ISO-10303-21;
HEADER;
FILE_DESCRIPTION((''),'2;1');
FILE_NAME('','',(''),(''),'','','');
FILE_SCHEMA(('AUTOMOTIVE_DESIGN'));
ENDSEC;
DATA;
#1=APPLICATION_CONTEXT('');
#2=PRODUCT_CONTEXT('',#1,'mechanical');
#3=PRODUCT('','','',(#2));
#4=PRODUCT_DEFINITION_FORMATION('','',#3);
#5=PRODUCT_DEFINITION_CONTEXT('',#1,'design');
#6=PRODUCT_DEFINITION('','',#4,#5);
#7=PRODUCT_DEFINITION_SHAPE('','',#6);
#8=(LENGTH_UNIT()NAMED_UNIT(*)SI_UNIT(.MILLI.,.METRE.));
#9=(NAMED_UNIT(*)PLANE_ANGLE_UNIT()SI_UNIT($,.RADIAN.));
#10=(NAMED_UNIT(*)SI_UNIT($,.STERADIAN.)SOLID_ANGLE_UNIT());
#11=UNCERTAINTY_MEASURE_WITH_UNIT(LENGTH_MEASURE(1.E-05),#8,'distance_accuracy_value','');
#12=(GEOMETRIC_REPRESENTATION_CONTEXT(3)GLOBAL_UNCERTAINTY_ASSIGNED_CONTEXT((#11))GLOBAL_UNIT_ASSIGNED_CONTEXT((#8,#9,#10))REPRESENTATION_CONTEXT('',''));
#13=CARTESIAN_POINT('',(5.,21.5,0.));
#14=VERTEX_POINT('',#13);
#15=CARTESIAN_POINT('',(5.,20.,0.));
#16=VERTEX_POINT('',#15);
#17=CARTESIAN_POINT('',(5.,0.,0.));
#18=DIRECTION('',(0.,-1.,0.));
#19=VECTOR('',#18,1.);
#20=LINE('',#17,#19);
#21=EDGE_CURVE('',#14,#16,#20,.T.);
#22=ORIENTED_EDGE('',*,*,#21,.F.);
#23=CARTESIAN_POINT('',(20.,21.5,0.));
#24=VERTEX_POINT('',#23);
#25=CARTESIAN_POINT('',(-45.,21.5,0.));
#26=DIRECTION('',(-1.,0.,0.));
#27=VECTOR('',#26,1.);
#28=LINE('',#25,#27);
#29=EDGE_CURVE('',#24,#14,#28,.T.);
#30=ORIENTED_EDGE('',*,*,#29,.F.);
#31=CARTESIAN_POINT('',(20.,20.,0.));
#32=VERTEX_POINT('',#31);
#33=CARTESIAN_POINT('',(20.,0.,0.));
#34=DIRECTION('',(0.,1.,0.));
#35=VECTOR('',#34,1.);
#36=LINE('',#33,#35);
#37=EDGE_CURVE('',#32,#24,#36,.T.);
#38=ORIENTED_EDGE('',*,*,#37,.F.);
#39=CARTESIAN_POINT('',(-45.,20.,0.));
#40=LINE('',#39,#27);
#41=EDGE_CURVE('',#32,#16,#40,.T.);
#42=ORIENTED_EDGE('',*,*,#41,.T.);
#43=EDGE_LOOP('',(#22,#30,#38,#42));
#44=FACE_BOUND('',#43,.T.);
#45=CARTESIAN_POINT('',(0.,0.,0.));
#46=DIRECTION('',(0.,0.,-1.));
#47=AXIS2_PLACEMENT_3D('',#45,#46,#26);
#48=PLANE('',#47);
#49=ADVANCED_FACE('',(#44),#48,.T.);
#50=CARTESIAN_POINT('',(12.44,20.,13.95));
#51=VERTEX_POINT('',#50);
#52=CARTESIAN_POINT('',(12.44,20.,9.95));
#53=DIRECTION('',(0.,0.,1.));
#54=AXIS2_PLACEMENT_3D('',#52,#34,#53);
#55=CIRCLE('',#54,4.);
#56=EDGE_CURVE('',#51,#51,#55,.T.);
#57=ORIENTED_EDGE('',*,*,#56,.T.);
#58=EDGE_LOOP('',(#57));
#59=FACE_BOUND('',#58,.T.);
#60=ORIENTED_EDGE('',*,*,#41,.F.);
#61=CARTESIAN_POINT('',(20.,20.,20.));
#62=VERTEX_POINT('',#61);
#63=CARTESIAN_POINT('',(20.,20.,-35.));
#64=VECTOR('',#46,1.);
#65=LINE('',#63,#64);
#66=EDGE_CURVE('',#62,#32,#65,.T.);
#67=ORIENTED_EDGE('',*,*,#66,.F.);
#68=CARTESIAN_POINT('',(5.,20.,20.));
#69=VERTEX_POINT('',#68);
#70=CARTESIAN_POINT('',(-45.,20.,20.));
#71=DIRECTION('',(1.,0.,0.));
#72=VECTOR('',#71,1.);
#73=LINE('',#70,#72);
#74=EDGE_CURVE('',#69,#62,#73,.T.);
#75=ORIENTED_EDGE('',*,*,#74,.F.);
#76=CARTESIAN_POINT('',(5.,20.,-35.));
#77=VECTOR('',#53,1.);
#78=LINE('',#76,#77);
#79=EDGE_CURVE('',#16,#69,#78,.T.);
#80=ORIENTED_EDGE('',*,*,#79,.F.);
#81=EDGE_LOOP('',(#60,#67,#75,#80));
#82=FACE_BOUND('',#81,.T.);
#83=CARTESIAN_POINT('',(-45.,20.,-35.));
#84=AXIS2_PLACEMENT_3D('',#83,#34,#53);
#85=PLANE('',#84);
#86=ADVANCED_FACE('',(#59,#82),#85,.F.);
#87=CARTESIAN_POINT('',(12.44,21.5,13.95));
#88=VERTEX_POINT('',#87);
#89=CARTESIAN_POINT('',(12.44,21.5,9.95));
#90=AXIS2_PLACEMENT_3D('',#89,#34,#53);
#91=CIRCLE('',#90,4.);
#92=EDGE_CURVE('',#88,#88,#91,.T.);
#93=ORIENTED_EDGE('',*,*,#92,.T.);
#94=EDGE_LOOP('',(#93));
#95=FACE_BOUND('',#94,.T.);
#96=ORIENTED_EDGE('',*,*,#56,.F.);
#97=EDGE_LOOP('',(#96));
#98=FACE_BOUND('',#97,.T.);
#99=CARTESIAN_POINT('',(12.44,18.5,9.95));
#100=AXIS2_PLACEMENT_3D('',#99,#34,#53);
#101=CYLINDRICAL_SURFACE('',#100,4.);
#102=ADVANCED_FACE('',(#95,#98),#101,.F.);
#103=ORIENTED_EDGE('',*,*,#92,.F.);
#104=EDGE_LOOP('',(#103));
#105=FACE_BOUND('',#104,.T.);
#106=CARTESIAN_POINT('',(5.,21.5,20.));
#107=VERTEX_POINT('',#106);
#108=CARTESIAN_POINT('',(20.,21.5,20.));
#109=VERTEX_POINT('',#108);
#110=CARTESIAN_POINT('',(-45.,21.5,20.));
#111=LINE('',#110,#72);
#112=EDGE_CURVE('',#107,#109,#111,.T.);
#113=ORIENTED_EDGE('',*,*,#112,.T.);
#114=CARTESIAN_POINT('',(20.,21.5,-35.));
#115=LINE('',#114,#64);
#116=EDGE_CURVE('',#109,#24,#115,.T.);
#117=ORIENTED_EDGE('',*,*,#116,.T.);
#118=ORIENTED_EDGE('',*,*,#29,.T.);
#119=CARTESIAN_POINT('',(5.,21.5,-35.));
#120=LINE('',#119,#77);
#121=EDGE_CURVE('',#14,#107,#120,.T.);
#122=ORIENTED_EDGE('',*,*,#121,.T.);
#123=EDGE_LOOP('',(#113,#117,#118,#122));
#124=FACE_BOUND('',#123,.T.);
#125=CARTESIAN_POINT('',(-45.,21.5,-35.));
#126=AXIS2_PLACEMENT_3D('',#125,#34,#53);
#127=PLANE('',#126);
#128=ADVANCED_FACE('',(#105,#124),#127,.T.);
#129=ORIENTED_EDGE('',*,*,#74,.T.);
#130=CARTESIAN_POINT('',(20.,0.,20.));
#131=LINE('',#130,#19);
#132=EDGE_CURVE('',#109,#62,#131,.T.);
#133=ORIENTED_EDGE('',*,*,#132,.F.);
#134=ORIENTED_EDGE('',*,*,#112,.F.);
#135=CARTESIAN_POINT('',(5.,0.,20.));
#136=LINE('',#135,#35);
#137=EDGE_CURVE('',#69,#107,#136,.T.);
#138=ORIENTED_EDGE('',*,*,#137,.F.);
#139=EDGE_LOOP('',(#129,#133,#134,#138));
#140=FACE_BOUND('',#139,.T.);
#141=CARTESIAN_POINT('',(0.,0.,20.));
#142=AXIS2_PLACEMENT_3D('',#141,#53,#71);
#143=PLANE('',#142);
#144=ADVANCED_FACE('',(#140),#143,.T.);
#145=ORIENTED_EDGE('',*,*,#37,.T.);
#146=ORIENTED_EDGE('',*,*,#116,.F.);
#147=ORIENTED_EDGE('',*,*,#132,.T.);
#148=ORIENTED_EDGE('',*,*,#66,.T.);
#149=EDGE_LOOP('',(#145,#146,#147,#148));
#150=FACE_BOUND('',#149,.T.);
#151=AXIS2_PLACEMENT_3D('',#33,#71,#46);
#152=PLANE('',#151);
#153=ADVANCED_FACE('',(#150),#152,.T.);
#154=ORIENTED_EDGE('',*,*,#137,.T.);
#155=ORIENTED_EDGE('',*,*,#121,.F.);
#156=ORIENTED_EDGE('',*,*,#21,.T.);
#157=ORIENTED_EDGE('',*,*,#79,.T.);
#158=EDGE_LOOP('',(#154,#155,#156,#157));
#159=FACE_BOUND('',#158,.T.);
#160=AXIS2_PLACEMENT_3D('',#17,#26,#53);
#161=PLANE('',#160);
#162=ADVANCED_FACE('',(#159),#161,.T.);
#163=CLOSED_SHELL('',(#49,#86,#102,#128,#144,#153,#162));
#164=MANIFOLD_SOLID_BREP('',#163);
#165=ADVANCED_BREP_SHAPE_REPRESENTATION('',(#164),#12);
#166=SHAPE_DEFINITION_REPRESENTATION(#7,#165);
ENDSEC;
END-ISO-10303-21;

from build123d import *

# Parameters (mm, degrees)
BOSS_EXTRUDE1_DEPTH = 20
BOSS_EXTRUDE2_DEPTH = 1.5
SKETCH3_W           = 10
SKETCH3_H           = 2
BOSS_EXTRUDE3_DEPTH = 100
SKETCH4_R           = 1.55
CUT_EXTRUDE1_DEPTH  = 2
SKETCH5_R           = 4
CUT_EXTRUDE2_DEPTH  = 3
CUT_EXTRUDE3_START  = -2
CUT_EXTRUDE3_DEPTH  = 2
SKETCH7_W           = 92.843167551
SKETCH7_H           = 36.119357845
CUT_EXTRUDE4_DEPTH  = 30
SKETCH8_W           = 90.626752411
SKETCH8_H           = 35.380552798
CUT_EXTRUDE5_DEPTH  = 55
SKETCH10_W          = 29.390209747
SKETCH10_H          = 30.061690813
CUT_EXTRUDE7_DEPTH  = 20
SKETCH11_W          = 23.008025921
SKETCH11_H          = 26.899718038
CUT_EXTRUDE8_DEPTH  = 40


# Read off the part's stored shape, not the designer's step: Boss-Extrude1, Cut-Extrude3
with BuildPart() as part:
    # Boss-Extrude1 outline → Boss-Extrude1 (new body)
    with BuildSketch(Plane(origin=(0, 0, 0), x_dir=(1, 0, 0), z_dir=(0, 1, 0))):
        with BuildLine():
            Line((49.999999852, 30), (4.999999852, 30))
            ThreePointArc((4.999999852, 30), (1.464465946, 31.464466094), (-1.48e-07, 35))
            Line((-1.48e-07, 35), (-1.48e-07, 40))
            Line((-1.48e-07, 40), (-40.000000148, 40))
            Line((-40.000000148, 40), (-40.000000111, 35))
            ThreePointArc((-40.000000111, 35), (-41.464466194, 31.46446612), (-45.000000074, 30.000000037))
            Line((-45.000000074, 30.000000037), (-50.000000148, 30))
            Line((-50.000000148, 30), (-50.000000148, -30))
            Line((-50.000000148, -30), (49.999999852, -30))
            Line((49.999999852, -30), (49.999999852, 30))
        make_face()
        with BuildLine():
            Line((-48.5, 28.5), (-44.999018222, 28.5))
            ThreePointArc((-44.999018222, 28.5), (-40.40345882, 30.40415302), (-38.5, 35))
            Line((-38.5, 35), (-38.5, 38.5))
            Line((-38.5, 38.5), (-1.500000148, 38.5))
            Line((-1.500000148, 38.5), (-1.500000148, 35))
            ThreePointArc((-1.500000148, 35), (0.403805774, 30.403805922), (4.999999852, 28.5))
            Line((4.999999852, 28.5), (48.5, 28.5))
            Line((48.5, 28.5), (48.5, -28.5))
            Line((48.5, -28.5), (-48.5, -28.5))
            Line((-48.5, -28.5), (-48.5, 28.5))
        make_face(mode=Mode.SUBTRACT)
    extrude(amount=BOSS_EXTRUDE1_DEPTH)

    # Sketch2 → Boss-Extrude2 (add)
    with BuildSketch(Plane(origin=(0, 20, 0), x_dir=(1, 0, 0), z_dir=(0, 1, 0))):
        with BuildLine():
            Line((-40.000000148, 40), (-1.48e-07, 40))
            Line((-1.48e-07, 40), (-1.48e-07, 35))
            ThreePointArc((-1.48e-07, 35), (1.464465946, 31.464466094), (4.999999852, 30))
            Line((4.999999852, 30), (49.999999852, 30))
            Line((49.999999852, 30), (49.999999852, -30))
            Line((49.999999852, -30), (-50.000000148, -30))
            Line((-50.000000148, -30), (-50.000000148, 30))
            Line((-50.000000148, 30), (-45.000000074, 30))
            ThreePointArc((-45.000000074, 30), (-41.464466216, 31.46446612), (-40.000000148, 35))
            Line((-40.000000148, 35), (-40.000000148, 40))
        make_face()
    extrude(amount=BOSS_EXTRUDE2_DEPTH)

    # Sketch3 → Boss-Extrude3 (add)
    with BuildSketch(Plane(origin=(49.999999852, 0, 0), x_dir=(0, 0, -1), z_dir=(1, 0, 0))):
        with Locations((35, 1)):
            Rectangle(SKETCH3_W, SKETCH3_H)
        with Locations((-35, 1)):
            Rectangle(SKETCH3_W, SKETCH3_H)
    extrude(amount=-BOSS_EXTRUDE3_DEPTH)

    # Sketch4 → Cut-Extrude1 (cut)
    with BuildSketch(Plane.XZ):
        with Locations(Location((-45, 35, 0), (0, 0, 270))):
            Circle(SKETCH4_R)
        with Locations(Location((45, 35, 0), (0, 0, 270))):
            Circle(SKETCH4_R)
        with Locations(Location((45, -35, 0), (0, 0, 270))):
            Circle(SKETCH4_R)
        with Locations(Location((-45, -35, 0), (0, 0, 270))):
            Circle(SKETCH4_R)
        with Locations(Location((5, 35, 0), (0, 0, 270))):
            Circle(SKETCH4_R)
        with Locations(Location((5, -35, 0), (0, 0, 270))):
            Circle(SKETCH4_R)
    extrude(amount=-CUT_EXTRUDE1_DEPTH, mode=Mode.SUBTRACT)

    # Sketch5 → Cut-Extrude2 (cut)
    with BuildSketch(Plane(origin=(0, 21.5, 0), x_dir=(1, 0, 0), z_dir=(0, 1, 0))):
        with Locations(Location((12.44, -9.95, 0), (0, 0, 270))):
            Circle(SKETCH5_R)
    extrude(amount=-CUT_EXTRUDE2_DEPTH, mode=Mode.SUBTRACT)

    # Cut-Extrude3 outline → Cut-Extrude3 (cut)
    with BuildSketch(Plane(origin=(0, 2, 0), x_dir=(1, 0, 0), z_dir=(0, 1, 0)).offset(CUT_EXTRUDE3_START)):
        with BuildLine():
            Line((-38.5, 38.5), (-38.5, 35))
            ThreePointArc((-38.5, 35), (-39.115846372, 32.238345392), (-40.846688027, 30))
            Line((-40.846688027, 30), (0.84668792, 30))
            ThreePointArc((0.84668792, 30), (-0.884153764, 32.238345383), (-1.500000148, 35))
            Line((-1.500000148, 35), (-1.500000148, 38.5))
            Line((-1.500000148, 38.5), (-38.5, 38.5))
        make_face()
    extrude(amount=CUT_EXTRUDE3_DEPTH, mode=Mode.SUBTRACT)

    # Sketch7 → Cut-Extrude4 (cut)
    with BuildSketch(Plane(origin=(49.999999852, 0, 0), x_dir=(0, 0, -1), z_dir=(1, 0, 0))):
        with Locations((0.287313074, 10.115071794)):
            Rectangle(SKETCH7_W, SKETCH7_H)
    extrude(amount=-CUT_EXTRUDE4_DEPTH, mode=Mode.SUBTRACT)

    # Sketch8 → Cut-Extrude5 (cut)
    with BuildSketch(Plane.ZY.offset(50.000000148)):
        with Locations((-1.067162845, 10.564009403)):
            Rectangle(SKETCH8_W, SKETCH8_H)
    extrude(amount=-CUT_EXTRUDE5_DEPTH, mode=Mode.SUBTRACT)

    # Sketch10 → Cut-Extrude7 (cut)
    with BuildSketch(Plane.XY.offset(40)):
        with Locations((11.70310279, 9.975782262)):
            Rectangle(SKETCH10_W, SKETCH10_H)
    extrude(amount=-CUT_EXTRUDE7_DEPTH, mode=Mode.SUBTRACT)

    # Sketch11 → Cut-Extrude8 (cut)
    with BuildSketch(Plane(origin=(0, 0, -40), x_dir=(-1, 0, 0), z_dir=(0, 0, -1))):
        with Locations((-13.617747202, 10.15531134)):
            Rectangle(SKETCH11_W, SKETCH11_H)
    extrude(amount=-CUT_EXTRUDE8_DEPTH, mode=Mode.SUBTRACT)


solid = part.part
